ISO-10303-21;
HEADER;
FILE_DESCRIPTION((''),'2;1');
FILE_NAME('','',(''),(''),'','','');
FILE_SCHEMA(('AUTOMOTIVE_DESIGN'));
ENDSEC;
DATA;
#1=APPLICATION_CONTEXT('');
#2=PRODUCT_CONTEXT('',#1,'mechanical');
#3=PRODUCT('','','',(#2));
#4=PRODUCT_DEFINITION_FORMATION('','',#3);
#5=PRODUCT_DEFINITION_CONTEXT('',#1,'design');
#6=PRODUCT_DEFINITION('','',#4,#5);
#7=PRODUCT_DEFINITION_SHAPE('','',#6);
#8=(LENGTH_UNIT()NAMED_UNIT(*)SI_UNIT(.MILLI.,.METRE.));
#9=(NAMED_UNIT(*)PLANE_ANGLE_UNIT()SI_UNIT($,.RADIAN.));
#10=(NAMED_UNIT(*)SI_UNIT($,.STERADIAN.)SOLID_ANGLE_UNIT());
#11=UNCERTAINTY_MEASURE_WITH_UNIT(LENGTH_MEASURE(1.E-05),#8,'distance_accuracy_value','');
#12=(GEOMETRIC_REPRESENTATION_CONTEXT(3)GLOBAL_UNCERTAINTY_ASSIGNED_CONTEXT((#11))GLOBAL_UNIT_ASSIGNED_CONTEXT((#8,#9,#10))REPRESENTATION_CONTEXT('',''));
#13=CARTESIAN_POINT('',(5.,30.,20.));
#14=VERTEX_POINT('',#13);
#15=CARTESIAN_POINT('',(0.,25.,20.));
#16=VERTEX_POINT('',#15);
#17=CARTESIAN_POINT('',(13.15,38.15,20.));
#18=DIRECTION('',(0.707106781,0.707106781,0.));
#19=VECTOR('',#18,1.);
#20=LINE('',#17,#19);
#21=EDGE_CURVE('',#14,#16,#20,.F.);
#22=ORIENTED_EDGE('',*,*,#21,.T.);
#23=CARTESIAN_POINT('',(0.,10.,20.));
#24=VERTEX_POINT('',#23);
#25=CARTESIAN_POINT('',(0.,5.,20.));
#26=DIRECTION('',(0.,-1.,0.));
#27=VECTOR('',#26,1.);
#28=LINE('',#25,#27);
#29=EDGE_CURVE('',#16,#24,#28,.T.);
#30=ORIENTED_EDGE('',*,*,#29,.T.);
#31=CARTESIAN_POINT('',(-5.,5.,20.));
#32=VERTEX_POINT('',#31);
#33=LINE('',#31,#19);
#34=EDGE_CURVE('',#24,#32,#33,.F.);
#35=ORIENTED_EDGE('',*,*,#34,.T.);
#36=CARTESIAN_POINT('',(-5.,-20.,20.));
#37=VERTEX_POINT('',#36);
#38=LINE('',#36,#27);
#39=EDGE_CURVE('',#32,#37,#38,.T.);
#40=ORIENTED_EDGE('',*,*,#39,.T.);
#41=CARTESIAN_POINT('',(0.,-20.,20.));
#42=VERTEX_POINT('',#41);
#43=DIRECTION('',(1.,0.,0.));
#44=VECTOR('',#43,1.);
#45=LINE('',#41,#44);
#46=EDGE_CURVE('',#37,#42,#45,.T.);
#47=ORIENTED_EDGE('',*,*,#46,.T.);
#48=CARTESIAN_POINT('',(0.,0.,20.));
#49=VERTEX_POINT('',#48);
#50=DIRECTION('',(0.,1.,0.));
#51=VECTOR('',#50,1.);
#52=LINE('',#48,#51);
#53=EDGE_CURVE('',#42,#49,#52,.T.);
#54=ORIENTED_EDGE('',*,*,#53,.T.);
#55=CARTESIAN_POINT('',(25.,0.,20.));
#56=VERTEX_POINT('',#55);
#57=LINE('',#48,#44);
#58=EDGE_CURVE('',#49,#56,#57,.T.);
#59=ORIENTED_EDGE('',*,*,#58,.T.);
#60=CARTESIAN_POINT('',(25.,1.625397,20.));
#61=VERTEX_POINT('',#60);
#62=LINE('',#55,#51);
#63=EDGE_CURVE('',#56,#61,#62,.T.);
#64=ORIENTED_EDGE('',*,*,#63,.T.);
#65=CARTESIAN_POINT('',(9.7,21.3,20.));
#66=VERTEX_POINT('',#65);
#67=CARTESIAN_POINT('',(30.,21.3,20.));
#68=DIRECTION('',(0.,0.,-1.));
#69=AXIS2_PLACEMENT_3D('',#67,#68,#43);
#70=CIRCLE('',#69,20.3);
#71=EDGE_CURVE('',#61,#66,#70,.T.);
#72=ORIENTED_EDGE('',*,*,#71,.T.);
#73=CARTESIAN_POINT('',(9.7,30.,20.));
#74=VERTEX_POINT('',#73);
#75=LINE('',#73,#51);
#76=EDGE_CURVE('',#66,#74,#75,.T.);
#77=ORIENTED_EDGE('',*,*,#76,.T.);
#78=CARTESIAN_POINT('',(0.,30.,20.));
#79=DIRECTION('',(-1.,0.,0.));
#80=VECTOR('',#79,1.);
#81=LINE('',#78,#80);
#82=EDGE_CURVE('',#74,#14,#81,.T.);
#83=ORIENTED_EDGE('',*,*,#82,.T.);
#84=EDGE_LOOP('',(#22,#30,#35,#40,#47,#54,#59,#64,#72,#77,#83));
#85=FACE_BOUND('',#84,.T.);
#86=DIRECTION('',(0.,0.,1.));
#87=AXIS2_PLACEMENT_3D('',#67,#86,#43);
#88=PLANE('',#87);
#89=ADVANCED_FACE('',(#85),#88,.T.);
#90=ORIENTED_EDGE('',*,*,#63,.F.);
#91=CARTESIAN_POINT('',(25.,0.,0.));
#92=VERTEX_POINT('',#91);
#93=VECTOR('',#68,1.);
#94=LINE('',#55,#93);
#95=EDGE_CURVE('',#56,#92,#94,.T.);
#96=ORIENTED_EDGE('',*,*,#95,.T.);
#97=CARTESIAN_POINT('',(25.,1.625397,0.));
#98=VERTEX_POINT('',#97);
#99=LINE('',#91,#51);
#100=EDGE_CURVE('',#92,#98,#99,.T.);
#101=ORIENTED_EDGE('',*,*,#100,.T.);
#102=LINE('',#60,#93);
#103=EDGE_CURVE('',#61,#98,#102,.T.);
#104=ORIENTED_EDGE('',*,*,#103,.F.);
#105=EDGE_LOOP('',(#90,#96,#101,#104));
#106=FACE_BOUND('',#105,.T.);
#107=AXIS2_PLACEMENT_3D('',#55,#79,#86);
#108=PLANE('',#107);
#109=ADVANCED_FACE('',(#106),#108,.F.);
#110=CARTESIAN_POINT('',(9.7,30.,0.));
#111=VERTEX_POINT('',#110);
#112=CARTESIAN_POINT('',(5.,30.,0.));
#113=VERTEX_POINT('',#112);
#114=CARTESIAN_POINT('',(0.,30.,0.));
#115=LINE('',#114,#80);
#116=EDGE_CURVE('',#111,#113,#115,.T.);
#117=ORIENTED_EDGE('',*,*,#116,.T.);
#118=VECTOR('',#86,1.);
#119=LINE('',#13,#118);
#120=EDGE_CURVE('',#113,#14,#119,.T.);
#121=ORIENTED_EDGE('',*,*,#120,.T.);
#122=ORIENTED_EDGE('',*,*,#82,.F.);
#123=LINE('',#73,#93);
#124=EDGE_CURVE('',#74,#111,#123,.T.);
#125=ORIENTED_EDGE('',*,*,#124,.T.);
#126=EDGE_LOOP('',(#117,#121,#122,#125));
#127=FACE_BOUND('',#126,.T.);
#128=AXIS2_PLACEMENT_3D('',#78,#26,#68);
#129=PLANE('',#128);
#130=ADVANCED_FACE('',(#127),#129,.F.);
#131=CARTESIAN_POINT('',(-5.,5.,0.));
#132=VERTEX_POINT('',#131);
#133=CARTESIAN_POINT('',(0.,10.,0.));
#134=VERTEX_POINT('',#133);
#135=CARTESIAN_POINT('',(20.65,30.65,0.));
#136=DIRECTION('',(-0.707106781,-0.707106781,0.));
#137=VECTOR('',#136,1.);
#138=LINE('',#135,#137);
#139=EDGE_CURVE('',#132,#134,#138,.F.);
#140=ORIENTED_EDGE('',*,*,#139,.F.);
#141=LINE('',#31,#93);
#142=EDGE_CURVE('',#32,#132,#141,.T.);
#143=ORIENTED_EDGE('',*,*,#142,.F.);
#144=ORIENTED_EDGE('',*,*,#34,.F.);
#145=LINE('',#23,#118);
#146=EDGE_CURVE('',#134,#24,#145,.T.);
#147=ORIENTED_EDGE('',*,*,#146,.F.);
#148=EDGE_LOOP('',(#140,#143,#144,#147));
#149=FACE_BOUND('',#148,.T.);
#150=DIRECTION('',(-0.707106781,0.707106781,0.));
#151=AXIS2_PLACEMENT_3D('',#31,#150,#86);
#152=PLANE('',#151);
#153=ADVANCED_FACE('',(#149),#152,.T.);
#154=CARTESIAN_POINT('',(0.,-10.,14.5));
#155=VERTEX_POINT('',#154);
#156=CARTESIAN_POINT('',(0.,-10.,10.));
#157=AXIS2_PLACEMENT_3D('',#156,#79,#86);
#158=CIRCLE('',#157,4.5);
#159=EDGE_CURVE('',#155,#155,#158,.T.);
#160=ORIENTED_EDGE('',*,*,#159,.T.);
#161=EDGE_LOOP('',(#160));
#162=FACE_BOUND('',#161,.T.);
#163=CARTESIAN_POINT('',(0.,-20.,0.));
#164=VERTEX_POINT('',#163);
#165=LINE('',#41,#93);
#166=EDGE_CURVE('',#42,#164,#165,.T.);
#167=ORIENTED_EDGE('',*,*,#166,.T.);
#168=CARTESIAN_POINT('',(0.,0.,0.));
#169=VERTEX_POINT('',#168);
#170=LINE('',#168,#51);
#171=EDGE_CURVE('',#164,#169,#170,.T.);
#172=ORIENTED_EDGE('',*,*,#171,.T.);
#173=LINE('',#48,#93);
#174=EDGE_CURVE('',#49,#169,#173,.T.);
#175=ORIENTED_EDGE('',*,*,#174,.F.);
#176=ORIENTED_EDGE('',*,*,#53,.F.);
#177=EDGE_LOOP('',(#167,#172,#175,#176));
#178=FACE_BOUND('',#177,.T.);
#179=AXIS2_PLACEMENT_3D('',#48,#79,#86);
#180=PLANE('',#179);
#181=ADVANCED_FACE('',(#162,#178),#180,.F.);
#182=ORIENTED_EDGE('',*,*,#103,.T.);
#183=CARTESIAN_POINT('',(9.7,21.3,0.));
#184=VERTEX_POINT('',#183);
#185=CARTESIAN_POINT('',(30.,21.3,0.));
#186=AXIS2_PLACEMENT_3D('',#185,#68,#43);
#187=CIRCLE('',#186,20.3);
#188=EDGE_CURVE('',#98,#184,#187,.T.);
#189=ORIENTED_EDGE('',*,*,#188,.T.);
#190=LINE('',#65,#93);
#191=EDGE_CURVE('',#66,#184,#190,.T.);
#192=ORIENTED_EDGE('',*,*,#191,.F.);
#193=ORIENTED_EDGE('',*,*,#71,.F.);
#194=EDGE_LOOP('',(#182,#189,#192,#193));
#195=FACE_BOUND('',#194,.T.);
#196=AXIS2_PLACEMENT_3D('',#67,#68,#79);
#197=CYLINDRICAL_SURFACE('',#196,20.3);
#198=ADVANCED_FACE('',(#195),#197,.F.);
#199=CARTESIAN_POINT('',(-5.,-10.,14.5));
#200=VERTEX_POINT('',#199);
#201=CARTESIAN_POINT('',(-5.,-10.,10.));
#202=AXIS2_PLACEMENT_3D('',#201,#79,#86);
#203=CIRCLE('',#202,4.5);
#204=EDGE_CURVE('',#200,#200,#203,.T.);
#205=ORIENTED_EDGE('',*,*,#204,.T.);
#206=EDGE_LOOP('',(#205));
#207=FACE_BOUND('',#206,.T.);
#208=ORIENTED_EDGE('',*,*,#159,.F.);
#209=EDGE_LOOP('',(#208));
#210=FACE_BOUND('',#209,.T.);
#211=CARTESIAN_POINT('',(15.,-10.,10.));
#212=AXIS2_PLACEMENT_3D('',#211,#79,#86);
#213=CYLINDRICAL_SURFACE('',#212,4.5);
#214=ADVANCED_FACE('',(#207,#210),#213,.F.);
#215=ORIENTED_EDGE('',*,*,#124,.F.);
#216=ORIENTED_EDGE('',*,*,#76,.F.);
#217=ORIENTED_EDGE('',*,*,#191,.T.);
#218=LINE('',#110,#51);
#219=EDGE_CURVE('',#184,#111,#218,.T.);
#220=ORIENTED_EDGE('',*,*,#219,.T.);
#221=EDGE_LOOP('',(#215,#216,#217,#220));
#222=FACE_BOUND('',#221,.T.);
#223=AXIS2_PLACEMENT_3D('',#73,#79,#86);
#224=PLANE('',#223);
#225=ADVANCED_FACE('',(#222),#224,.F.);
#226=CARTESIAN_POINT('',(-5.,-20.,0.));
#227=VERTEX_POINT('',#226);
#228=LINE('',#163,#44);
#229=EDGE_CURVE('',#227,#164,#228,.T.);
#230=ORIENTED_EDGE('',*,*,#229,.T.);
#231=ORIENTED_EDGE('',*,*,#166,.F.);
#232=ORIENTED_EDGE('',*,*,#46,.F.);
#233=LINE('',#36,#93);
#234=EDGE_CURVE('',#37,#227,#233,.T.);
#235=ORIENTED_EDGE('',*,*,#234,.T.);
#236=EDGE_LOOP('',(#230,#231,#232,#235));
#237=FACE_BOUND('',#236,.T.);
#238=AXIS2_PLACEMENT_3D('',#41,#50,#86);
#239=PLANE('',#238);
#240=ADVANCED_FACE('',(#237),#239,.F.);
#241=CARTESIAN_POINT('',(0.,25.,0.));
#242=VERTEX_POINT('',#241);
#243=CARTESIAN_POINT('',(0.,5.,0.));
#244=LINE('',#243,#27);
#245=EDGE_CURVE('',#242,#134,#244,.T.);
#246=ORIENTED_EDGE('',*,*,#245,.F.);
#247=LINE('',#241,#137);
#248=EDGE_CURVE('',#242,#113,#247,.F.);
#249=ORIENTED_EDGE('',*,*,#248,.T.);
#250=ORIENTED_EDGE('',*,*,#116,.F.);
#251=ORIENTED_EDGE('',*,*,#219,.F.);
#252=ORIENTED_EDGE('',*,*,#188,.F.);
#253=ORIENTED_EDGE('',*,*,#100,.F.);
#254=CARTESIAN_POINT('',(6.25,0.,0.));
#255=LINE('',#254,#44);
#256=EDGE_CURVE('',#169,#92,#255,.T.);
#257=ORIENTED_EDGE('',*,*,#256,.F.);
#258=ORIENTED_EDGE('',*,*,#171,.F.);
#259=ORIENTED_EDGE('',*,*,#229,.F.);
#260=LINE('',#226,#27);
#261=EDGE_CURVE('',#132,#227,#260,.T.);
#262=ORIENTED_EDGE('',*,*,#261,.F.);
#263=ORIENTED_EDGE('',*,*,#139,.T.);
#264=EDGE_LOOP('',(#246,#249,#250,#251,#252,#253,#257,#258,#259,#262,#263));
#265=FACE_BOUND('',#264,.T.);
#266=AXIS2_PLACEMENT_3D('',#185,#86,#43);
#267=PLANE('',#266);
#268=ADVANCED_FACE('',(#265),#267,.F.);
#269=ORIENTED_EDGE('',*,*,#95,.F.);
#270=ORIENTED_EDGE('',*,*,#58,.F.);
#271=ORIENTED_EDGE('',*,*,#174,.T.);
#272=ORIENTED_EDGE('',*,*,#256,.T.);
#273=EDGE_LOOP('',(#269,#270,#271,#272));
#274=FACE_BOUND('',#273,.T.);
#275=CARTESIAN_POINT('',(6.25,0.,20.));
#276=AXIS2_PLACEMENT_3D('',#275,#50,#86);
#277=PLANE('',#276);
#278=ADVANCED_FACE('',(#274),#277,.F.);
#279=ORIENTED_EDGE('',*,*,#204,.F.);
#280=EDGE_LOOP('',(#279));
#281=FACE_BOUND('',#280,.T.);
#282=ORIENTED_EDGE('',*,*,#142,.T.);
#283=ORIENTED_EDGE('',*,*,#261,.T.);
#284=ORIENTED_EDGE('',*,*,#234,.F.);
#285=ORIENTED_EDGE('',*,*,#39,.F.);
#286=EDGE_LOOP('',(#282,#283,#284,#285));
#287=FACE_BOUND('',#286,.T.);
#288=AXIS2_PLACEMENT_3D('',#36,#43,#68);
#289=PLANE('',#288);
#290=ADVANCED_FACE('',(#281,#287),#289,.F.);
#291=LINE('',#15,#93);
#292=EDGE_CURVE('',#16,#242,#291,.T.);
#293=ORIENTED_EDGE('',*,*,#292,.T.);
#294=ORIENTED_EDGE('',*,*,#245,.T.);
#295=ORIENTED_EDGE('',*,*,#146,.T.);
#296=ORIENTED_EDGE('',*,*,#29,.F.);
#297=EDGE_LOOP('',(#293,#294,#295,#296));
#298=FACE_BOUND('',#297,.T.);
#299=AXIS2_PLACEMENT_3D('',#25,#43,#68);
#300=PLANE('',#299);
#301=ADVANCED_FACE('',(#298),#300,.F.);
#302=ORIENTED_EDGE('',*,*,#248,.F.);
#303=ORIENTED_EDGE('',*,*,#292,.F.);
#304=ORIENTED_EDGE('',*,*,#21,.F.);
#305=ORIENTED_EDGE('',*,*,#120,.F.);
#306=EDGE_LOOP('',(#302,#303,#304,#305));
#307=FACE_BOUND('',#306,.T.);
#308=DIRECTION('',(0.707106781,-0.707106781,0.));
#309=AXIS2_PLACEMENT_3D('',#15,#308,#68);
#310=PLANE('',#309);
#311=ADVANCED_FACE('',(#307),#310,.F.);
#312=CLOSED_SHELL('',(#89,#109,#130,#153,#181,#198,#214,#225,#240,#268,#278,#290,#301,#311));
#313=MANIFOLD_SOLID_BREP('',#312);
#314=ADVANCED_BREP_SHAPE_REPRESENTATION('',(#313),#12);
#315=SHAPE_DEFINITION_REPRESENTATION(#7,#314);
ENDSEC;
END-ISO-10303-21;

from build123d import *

# Parameters (mm, degrees)
EXTRUDE_1_DEPTH     = 20
SKETCH_3_R          = 4.5
CUT_EXTRUDE_2_DEPTH = 20
CHAMFER_1_SIZE      = 5
CHAMFER_2_SIZE      = 5


with BuildPart() as part:
    # 草图1 → 凸台-拉伸1 (new body)
    with BuildSketch(Plane.XY):
        with BuildLine():
            Line((0, 5), (0, 30))
            Line((0, 30), (9.7, 30))
            Line((9.7, 30), (9.7, 21.3))
            ThreePointArc((9.7, 21.3), (13.975175508, 8.838258549), (25, 1.625397082))
            Line((25, 1.625397082), (25, 0))
            Line((25, 0), (6.25, 0))
            Line((6.25, 0), (0, 0))
            Line((0, 0), (0, -20))
            Line((0, -20), (-5, -20))
            Line((-5, -20), (-5, 5))
            Line((-5, 5), (0, 5))
        make_face()
    extrude(amount=EXTRUDE_1_DEPTH)

    # 草图3 → 切除-拉伸2 (cut)
    with BuildSketch(Plane.ZY.offset(5)):
        with Locations((10, -10)):
            Circle(SKETCH_3_R)
    extrude(amount=-CUT_EXTRUDE_2_DEPTH, mode=Mode.SUBTRACT)

    # 倒角1
    chamfer_1_edges = [part.edges().sort_by_distance(p)[0] for p in [
        (0, 5, 10),
    ]]
    chamfer(chamfer_1_edges, length=CHAMFER_1_SIZE - 0.0001)  # a hair under: the kernel refuses the full size

    # 倒角2
    chamfer_2_edges = [part.edges().sort_by_distance(p)[0] for p in [
        (0, 30, 10),
    ]]
    chamfer(chamfer_2_edges, length=CHAMFER_2_SIZE)


solid = part.part
